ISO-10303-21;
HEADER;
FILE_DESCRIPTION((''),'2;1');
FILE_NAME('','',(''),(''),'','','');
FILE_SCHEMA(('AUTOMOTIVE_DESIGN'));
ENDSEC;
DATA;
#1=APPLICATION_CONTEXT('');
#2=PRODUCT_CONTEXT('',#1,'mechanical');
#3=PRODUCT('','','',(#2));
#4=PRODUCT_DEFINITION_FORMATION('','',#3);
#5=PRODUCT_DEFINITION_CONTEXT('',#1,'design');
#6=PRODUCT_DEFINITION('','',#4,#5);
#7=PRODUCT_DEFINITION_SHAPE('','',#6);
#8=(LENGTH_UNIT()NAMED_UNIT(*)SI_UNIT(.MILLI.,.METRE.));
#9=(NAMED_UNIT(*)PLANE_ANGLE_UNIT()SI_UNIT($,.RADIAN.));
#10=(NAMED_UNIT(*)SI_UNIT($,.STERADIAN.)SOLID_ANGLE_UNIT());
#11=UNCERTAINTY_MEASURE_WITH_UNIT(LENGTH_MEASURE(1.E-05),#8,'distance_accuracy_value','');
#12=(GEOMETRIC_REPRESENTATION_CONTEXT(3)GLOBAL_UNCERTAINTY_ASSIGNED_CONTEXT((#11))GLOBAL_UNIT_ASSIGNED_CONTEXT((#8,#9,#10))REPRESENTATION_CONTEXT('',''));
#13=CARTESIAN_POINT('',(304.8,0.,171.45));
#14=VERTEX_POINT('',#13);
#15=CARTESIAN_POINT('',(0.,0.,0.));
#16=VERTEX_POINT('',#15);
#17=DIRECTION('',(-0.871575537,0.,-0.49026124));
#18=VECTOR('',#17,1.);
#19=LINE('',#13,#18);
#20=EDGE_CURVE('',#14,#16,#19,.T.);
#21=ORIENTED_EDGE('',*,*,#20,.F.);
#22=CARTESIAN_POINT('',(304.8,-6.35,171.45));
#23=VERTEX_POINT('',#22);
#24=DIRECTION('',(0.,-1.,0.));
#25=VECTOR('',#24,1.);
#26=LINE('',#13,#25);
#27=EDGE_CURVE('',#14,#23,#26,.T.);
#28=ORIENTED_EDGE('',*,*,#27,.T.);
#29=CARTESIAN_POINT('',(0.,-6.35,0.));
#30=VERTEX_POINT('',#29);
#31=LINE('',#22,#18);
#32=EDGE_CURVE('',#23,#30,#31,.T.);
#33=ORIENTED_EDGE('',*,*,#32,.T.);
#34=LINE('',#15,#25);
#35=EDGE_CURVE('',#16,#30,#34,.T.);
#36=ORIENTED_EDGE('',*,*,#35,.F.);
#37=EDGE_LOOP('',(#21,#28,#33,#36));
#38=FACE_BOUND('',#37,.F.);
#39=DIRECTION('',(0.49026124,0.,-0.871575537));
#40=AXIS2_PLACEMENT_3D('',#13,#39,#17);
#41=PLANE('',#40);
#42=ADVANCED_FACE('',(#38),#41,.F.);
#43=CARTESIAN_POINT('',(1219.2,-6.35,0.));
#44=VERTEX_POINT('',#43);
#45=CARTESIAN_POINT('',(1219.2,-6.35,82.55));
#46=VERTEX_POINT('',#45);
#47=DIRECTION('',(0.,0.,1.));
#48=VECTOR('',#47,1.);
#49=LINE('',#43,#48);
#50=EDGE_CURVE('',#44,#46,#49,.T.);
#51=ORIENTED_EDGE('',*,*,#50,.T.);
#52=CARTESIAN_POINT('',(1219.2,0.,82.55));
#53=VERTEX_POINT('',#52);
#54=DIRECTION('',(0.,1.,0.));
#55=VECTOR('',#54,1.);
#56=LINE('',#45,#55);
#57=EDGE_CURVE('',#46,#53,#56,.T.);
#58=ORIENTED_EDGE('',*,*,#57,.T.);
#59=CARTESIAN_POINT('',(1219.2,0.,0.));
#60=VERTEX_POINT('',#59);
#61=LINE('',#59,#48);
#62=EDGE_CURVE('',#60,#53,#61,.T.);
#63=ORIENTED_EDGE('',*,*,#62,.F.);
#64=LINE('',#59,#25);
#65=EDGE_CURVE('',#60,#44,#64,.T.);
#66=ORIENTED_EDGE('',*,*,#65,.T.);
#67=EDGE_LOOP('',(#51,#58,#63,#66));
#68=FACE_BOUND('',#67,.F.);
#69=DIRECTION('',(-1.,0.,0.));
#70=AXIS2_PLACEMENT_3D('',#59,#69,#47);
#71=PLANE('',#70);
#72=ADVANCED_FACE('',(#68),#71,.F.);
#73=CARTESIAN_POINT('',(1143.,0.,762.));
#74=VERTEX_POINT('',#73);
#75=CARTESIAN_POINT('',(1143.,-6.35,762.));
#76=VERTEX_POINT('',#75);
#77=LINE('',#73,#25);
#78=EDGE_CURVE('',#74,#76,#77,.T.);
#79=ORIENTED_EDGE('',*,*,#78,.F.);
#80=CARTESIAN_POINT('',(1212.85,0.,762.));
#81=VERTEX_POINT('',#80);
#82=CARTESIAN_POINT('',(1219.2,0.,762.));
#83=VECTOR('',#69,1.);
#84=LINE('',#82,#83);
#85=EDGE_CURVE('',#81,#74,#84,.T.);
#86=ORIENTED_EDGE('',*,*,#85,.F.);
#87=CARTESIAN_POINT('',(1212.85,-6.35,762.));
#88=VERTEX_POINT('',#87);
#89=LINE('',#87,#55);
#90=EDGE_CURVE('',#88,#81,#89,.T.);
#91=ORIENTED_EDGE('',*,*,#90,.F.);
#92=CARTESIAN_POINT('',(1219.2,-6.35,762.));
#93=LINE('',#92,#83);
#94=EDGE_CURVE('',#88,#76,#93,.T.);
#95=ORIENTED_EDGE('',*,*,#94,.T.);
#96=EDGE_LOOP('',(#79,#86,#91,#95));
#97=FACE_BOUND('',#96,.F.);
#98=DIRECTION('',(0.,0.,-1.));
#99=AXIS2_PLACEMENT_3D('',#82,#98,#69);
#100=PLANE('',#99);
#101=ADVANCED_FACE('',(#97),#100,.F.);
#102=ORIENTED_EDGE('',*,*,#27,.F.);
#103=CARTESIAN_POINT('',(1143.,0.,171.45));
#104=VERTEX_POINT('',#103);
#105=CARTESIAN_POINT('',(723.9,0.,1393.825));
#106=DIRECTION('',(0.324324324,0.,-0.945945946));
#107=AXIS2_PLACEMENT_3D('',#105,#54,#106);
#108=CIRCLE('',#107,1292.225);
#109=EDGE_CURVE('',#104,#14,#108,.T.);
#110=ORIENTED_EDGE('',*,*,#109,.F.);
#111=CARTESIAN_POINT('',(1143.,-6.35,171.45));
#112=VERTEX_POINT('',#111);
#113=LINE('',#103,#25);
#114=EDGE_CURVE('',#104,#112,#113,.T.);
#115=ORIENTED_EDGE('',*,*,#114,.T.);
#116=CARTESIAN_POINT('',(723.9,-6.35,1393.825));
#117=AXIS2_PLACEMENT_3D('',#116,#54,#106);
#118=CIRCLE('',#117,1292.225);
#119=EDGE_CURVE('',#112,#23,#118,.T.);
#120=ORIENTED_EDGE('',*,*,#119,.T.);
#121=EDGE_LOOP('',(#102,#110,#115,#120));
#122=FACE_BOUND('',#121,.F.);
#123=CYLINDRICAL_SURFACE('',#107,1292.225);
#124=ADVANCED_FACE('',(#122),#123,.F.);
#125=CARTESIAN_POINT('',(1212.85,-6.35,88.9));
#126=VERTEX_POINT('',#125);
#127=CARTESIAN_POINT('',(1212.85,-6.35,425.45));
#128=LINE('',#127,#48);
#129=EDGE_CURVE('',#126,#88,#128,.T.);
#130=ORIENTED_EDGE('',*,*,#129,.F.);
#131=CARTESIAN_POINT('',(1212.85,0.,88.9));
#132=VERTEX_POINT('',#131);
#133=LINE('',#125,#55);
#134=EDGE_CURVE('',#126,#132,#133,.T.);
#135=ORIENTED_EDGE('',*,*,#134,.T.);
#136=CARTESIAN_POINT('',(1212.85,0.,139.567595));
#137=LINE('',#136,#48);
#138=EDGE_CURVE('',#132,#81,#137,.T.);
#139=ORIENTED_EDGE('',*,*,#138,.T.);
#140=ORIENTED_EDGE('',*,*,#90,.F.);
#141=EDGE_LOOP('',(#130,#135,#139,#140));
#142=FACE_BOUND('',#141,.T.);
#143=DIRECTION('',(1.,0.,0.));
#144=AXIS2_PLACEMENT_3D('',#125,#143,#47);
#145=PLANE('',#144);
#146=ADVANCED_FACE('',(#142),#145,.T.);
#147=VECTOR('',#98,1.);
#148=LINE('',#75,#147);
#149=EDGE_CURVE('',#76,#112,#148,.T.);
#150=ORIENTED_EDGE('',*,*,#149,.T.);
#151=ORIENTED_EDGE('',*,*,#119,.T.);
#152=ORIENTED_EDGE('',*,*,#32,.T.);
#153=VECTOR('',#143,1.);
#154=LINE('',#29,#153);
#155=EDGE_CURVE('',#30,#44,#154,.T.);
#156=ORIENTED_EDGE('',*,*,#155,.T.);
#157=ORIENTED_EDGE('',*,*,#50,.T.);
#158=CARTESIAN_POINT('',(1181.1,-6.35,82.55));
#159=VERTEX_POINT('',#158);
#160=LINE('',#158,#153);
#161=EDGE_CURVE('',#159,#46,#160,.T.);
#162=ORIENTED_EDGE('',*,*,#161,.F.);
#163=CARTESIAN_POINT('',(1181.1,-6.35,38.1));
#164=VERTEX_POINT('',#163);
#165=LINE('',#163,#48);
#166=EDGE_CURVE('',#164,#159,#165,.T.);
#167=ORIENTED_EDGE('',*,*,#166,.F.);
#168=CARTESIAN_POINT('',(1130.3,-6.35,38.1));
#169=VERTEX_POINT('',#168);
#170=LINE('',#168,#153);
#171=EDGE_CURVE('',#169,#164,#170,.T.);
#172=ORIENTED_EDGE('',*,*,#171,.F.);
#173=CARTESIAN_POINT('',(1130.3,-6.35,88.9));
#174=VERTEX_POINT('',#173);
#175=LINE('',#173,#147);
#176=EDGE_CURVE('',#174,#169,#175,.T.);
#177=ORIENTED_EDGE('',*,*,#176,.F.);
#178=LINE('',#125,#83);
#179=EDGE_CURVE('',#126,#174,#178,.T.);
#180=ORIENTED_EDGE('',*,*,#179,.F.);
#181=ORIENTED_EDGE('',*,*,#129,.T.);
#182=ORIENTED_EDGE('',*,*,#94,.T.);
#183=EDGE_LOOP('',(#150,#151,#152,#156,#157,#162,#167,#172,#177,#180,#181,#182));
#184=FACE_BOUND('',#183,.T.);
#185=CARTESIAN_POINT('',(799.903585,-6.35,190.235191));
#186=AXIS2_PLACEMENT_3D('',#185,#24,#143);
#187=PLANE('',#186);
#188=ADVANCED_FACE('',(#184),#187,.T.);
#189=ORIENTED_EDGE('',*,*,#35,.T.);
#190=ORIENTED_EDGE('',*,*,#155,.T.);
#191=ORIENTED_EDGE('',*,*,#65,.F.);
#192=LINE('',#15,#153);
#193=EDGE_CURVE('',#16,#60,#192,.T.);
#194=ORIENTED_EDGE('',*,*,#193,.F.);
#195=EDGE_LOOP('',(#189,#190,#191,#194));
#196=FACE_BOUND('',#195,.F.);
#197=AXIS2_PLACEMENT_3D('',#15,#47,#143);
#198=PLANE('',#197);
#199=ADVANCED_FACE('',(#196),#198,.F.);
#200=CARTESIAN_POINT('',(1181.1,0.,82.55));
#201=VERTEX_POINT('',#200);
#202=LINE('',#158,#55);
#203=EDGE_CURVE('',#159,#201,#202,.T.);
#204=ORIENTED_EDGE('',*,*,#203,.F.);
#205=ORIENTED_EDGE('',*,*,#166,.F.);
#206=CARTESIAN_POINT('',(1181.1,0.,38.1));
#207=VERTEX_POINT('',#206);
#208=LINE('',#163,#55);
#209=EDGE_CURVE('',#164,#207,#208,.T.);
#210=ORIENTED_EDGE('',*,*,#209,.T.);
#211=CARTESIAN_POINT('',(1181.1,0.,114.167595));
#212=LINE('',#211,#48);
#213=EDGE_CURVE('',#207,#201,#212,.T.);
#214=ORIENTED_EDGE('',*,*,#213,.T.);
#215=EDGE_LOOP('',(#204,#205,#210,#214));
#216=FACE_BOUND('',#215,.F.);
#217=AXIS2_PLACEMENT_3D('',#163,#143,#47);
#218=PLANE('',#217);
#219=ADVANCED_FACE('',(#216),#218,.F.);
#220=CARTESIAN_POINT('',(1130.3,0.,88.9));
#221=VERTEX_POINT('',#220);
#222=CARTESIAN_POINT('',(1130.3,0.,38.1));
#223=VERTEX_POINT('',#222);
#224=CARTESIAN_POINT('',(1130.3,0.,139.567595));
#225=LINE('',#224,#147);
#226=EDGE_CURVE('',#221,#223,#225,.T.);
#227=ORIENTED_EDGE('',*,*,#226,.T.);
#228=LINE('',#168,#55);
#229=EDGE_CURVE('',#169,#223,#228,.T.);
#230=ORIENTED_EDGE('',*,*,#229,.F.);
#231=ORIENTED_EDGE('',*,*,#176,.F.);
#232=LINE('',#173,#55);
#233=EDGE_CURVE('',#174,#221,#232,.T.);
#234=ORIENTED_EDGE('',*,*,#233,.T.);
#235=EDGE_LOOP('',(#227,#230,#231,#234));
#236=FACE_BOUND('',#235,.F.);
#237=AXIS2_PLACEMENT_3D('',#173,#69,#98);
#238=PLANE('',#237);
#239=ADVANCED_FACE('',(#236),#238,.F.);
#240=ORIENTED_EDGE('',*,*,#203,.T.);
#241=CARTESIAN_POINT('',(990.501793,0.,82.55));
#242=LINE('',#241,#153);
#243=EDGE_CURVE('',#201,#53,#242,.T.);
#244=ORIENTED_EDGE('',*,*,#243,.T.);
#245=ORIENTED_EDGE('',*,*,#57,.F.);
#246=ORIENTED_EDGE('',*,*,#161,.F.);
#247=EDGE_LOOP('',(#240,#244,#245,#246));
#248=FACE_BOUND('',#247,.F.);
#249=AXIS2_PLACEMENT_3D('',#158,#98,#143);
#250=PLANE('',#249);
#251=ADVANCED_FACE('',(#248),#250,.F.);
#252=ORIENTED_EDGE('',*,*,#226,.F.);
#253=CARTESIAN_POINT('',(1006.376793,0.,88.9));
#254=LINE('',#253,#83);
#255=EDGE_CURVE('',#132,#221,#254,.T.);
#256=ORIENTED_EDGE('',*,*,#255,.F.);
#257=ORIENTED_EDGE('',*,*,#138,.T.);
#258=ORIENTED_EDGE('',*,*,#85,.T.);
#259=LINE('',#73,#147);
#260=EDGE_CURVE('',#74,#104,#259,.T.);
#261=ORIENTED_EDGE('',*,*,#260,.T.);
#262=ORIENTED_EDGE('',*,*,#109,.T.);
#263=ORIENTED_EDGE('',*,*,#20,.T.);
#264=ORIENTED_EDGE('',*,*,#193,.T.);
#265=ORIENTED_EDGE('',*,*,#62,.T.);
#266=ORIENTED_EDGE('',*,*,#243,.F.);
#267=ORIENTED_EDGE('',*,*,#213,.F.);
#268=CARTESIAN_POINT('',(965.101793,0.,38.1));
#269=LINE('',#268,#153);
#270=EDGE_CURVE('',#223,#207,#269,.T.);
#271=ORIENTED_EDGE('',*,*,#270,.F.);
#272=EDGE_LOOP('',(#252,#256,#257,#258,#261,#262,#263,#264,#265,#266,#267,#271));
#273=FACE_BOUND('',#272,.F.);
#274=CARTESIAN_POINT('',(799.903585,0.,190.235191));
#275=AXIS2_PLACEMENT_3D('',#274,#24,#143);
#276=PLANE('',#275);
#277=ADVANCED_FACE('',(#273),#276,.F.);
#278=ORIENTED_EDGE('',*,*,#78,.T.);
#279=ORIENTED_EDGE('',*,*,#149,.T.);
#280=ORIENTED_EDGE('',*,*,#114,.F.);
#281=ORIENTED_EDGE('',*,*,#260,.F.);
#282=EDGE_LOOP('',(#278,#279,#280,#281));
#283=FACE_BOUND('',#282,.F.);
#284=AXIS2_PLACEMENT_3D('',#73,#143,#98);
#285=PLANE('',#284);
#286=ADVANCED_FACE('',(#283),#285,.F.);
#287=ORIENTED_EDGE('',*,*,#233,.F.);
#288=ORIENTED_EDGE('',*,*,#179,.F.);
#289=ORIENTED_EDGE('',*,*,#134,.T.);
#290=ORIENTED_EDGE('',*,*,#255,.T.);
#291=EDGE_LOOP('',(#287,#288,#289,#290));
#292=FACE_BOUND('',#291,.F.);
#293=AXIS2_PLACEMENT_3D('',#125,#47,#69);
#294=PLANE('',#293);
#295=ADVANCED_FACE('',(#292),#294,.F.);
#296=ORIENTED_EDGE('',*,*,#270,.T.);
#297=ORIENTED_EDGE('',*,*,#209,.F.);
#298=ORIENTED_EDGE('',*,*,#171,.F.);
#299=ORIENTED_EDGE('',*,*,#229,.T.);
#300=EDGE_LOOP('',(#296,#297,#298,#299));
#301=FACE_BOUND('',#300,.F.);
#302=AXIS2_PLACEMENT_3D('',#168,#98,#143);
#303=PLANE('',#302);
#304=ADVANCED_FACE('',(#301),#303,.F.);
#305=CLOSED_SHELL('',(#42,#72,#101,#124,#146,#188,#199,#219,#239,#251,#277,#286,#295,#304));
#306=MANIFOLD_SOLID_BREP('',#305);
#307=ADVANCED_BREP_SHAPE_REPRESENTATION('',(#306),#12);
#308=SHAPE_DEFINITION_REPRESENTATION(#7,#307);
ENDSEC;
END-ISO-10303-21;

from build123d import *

# Parameters (mm, degrees)
F1_DEPTH = 6.35
F2_W     = 6.35
F2_H     = 673.1
F3_DEPTH = 25.4


with BuildPart() as f1:
    # F0 (on Front) → F1 (new body)
    with BuildSketch(Plane.XZ):
        Polygon((304.8, 171.45), (0, 0), (1219.2, 0), (1219.2, 762), (1143, 762), (1143, 171.45), (1143, 101.6), (723.9, 101.6), (306.02731713, 101.6), (303.9947166863, 99.612464416), (268.4785905511, 135.9338738649), align=None)
        with BuildLine():
            ThreePointArc((723.9, 101.6), (511.4595186293, 119.182111776), (304.8, 171.45))
            Line((304.8, 171.45), (340.3161261351, 135.1285905511))
            Line((340.3161261351, 135.1285905511), (306.02731713, 101.6))
            Line((306.02731713, 101.6), (723.9, 101.6))
        make_face()
        with BuildLine():
            ThreePointArc((1143, 171.45), (936.3404813707, 119.182111776), (723.9, 101.6))
            Line((723.9, 101.6), (1143, 101.6))
            Line((1143, 101.6), (1143, 171.45))
        make_face()
        Polygon((304.8, 101.6), (304.8, 171.45), (268.4785905511, 135.9338738649), (303.9947166863, 99.612464416), (306.02731713, 101.6), align=None)
        Polygon((340.3161261351, 135.1285905511), (304.8, 171.45), (304.8, 101.6), (306.02731713, 101.6), align=None)
    extrude(amount=F1_DEPTH)

    # F2 (on face) → F3 (cut)
    with BuildSketch(Plane.XZ.offset(6.35)):
        Polygon((1130.3, 88.9), (1130.3, 38.1), (1181.1, 38.1), (1181.1, 82.55), (1181.1, 88.9), align=None)
        with Locations((1216.025, 425.45)):
            Rectangle(F2_W, F2_H)
        Polygon((1181.1, 88.9), (1181.1, 82.55), (1219.2, 82.55), (1219.2, 88.9), (1212.85, 88.9), align=None)
    extrude(amount=-F3_DEPTH, mode=Mode.SUBTRACT)


solid = f1.part
